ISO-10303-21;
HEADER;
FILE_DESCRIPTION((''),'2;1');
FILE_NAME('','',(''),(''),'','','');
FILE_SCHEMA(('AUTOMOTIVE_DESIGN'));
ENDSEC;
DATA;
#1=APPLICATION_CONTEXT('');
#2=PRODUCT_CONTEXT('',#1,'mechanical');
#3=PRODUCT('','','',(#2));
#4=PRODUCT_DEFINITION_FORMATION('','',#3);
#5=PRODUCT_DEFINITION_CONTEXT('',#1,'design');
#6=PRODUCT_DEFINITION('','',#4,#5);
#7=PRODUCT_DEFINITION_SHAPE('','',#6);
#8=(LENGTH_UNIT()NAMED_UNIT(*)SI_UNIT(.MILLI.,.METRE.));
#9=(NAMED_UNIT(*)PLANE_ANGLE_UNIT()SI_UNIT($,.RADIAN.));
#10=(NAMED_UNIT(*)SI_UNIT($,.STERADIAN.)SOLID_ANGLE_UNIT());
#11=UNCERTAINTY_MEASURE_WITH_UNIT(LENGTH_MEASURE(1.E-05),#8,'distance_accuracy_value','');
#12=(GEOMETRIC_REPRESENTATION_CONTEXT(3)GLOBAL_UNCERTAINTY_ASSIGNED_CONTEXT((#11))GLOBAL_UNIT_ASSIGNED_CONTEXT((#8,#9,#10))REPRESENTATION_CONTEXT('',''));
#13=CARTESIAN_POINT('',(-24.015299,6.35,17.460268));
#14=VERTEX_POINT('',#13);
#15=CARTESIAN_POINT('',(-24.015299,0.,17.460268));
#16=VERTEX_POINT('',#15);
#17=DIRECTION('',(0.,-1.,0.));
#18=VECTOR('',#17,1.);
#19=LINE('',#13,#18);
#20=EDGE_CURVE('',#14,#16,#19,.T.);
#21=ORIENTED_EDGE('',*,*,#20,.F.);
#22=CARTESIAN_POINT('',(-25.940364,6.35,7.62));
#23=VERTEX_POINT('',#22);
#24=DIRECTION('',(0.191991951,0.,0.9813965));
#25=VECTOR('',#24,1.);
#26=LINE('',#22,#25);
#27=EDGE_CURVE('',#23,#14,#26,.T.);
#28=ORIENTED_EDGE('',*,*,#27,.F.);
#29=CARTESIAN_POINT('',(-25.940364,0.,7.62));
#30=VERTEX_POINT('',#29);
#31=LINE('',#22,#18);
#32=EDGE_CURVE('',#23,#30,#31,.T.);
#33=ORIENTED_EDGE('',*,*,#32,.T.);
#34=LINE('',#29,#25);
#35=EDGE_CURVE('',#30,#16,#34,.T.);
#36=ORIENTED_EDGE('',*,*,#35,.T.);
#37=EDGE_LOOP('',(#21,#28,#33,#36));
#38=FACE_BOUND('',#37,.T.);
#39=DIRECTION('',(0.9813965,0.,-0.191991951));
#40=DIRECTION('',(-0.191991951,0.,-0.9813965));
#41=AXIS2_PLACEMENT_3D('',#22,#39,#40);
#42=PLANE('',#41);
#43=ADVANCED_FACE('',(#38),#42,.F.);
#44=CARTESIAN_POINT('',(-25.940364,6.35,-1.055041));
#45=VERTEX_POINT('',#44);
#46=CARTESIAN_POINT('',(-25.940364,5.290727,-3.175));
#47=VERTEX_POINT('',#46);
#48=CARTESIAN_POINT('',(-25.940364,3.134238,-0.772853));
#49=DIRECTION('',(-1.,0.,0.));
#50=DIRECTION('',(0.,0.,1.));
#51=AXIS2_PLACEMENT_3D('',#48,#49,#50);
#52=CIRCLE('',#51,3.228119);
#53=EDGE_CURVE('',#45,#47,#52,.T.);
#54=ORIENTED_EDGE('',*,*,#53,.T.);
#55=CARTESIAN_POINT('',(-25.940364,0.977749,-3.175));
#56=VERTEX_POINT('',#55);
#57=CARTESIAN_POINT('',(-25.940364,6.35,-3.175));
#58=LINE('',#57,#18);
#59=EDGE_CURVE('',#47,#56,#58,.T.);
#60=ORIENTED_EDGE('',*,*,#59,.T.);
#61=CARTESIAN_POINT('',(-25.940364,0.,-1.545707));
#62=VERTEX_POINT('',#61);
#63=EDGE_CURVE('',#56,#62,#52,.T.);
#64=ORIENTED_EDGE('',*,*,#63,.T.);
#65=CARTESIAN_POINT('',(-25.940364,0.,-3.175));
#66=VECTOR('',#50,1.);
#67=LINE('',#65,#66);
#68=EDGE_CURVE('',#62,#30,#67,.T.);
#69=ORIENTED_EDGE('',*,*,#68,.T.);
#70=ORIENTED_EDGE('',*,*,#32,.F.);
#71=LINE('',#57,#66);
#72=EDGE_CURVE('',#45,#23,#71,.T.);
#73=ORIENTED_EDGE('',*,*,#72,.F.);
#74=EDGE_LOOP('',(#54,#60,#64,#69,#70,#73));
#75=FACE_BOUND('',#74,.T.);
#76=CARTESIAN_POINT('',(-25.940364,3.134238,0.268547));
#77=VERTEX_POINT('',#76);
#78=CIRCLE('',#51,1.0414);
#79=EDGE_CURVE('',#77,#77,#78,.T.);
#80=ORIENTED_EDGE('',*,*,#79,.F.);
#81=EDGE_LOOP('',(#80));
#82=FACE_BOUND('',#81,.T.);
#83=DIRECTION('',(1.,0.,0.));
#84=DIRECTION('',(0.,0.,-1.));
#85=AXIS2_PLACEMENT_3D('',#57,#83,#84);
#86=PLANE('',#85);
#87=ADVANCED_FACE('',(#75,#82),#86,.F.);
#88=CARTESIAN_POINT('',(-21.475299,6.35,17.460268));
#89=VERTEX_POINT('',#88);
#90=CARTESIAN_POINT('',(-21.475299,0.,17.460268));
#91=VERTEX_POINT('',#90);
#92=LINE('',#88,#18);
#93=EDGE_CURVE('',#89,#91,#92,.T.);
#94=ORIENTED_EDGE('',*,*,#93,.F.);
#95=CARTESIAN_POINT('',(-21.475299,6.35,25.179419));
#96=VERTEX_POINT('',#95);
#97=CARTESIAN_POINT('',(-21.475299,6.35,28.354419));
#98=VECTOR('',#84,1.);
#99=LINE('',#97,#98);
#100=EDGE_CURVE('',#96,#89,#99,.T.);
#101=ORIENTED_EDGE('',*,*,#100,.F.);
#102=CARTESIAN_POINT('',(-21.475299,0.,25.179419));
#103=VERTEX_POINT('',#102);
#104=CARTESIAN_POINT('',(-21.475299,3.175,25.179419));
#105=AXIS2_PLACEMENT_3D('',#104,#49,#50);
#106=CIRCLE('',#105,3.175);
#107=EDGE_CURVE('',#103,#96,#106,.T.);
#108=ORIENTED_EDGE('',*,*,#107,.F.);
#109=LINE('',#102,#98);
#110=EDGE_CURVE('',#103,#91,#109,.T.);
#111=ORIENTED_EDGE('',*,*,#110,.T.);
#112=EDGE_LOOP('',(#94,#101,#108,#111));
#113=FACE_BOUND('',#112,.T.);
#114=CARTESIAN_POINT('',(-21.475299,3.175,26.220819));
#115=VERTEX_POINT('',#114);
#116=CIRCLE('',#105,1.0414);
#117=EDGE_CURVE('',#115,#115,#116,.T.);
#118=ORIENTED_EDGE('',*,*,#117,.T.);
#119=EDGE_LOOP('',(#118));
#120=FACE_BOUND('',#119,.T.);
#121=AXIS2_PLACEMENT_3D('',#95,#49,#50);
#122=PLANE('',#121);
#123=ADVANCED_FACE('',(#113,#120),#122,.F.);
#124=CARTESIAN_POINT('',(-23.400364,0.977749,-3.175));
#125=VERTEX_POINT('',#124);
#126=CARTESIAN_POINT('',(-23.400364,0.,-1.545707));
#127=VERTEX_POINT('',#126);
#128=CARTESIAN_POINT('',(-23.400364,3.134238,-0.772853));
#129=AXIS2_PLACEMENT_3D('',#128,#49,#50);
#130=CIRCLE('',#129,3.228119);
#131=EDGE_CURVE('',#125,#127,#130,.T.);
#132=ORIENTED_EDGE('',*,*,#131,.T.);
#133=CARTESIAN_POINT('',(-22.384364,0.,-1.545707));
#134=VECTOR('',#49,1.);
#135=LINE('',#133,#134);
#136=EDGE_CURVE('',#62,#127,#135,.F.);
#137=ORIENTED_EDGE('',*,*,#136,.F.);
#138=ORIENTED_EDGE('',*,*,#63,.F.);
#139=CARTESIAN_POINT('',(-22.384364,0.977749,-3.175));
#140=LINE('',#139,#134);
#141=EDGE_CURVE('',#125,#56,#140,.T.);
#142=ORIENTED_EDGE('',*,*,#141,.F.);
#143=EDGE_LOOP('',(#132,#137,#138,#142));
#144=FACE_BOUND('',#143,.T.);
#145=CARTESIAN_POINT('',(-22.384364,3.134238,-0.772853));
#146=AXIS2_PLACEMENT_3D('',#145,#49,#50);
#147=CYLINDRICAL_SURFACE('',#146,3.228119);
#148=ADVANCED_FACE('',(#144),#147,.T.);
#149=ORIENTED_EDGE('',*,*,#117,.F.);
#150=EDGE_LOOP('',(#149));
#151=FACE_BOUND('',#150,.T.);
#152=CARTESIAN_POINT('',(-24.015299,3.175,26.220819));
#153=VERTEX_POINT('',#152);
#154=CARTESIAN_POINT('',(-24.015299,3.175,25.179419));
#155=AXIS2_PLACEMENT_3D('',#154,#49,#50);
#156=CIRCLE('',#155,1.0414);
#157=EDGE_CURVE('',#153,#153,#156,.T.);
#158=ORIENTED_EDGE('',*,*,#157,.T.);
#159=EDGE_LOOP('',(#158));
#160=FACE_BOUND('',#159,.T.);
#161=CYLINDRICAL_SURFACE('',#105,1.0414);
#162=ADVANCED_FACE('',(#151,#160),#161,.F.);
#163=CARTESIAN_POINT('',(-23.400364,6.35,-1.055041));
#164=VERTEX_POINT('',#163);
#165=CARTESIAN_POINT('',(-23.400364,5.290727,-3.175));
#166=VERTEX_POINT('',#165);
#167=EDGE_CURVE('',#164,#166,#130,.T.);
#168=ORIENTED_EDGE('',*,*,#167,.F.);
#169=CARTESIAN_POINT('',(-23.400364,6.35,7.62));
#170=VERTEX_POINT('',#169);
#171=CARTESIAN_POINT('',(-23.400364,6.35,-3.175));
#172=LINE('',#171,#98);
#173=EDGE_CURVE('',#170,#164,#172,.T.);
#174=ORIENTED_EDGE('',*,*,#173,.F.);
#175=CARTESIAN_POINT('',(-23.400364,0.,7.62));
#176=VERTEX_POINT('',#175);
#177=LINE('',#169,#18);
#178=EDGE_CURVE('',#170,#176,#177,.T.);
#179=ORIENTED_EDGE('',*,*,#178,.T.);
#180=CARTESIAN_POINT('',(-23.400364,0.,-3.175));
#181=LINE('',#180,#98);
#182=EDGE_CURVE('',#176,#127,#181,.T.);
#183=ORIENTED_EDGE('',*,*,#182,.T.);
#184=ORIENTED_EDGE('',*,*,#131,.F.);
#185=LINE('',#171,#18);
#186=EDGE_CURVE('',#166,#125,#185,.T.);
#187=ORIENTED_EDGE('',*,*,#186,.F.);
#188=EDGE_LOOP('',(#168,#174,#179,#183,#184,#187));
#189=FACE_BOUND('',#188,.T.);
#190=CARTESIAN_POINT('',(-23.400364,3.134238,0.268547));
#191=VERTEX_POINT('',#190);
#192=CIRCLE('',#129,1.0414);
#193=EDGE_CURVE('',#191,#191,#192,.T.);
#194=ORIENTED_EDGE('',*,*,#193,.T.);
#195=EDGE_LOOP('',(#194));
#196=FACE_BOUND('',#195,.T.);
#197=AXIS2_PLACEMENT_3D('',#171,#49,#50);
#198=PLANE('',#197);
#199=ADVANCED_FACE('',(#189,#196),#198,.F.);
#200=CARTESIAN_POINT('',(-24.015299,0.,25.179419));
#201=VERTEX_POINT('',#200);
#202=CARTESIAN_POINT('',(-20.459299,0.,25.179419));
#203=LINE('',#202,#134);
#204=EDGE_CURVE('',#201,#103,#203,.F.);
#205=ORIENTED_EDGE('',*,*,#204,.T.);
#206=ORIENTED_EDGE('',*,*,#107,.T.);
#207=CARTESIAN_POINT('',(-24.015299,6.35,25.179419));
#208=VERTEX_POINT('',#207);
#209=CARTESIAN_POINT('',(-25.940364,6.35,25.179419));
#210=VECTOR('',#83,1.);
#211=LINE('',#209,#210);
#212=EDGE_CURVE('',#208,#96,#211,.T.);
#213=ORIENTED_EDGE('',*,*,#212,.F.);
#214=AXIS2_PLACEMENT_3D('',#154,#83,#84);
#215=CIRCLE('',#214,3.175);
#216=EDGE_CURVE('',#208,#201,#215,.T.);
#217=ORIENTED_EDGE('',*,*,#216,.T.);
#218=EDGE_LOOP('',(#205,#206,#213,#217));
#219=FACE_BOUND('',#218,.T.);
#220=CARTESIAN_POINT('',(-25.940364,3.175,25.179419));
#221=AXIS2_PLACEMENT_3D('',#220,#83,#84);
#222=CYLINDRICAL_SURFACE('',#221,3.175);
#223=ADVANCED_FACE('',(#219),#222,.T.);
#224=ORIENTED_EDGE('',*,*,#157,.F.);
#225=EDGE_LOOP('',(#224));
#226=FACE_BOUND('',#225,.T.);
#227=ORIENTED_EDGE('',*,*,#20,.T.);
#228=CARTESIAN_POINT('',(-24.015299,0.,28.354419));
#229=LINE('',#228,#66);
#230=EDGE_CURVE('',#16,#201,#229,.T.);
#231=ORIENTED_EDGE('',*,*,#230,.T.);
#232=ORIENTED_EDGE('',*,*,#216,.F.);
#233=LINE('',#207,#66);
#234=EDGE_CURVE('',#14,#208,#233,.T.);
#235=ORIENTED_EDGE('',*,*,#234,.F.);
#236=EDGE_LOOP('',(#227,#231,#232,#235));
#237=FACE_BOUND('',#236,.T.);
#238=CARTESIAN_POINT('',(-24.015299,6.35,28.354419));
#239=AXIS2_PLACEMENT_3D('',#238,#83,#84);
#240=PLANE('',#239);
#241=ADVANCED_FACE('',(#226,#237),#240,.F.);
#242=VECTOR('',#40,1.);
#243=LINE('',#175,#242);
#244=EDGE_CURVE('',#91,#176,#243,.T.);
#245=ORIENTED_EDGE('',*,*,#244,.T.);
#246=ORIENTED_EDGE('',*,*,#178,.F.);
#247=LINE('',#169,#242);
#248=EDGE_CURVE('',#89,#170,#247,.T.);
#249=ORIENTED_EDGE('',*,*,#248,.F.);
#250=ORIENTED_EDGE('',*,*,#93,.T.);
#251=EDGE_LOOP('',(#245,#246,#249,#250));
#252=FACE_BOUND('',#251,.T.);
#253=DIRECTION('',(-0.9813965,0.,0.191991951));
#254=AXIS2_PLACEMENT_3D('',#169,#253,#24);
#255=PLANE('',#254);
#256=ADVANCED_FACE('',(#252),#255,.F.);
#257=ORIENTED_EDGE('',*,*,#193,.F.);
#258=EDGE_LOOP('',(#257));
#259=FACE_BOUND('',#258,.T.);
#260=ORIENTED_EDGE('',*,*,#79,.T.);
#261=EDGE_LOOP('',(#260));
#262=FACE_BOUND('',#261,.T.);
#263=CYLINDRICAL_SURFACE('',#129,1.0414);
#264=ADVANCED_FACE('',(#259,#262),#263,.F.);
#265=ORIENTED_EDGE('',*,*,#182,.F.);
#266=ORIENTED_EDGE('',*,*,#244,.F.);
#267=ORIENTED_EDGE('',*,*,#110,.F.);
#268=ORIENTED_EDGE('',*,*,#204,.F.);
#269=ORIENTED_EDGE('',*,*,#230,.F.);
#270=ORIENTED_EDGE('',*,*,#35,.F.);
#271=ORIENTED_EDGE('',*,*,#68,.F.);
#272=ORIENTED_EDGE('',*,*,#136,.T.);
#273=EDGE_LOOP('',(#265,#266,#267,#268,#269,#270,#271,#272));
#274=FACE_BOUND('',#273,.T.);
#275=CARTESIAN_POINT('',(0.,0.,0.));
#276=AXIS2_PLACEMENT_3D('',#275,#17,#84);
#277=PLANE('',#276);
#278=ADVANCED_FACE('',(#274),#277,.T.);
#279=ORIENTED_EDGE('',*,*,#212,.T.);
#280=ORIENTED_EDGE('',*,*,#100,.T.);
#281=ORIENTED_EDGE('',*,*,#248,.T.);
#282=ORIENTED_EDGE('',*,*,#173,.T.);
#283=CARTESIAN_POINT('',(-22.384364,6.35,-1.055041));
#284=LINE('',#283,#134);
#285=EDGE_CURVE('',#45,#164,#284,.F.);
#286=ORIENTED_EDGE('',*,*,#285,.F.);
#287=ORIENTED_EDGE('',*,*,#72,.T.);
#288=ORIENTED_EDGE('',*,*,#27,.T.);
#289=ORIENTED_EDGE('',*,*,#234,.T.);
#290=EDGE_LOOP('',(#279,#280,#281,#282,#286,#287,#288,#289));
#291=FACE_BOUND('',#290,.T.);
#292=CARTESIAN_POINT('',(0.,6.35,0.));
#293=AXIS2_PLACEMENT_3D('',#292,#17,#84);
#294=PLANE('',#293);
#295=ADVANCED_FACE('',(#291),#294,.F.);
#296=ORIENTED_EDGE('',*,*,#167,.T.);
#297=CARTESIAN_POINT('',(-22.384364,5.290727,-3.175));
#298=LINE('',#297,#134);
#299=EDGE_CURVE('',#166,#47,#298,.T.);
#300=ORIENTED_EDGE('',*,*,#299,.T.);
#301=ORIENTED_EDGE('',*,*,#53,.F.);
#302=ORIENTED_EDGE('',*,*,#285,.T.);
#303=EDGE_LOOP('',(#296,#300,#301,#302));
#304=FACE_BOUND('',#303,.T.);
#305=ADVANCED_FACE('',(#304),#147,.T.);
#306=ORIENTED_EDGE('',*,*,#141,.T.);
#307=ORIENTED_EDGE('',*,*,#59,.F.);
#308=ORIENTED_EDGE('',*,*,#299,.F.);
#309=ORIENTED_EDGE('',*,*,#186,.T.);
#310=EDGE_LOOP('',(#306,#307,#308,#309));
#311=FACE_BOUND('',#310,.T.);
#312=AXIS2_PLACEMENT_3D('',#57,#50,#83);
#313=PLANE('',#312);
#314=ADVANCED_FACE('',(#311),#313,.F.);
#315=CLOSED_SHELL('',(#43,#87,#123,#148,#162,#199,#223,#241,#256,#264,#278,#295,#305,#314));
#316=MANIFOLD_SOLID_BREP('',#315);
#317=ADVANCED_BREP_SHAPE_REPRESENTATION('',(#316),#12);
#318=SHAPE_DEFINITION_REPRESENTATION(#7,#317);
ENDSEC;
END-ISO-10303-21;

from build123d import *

# Parameters (mm, degrees)
BOSS_EXTRUDE1_DEPTH     = 6.35
CUT_EXTRUDE1_DEPTH      = 30.397829873
CUT_EXTRUDE1_DEPTH_BACK = 3.556
CUT_EXTRUDE2_START      = -2.54
CUT_EXTRUDE2_DEPTH      = 2.54
SKETCH4_3_R             = 1.0414
CUT_EXTRUDE3_DEPTH      = 2.54
SKETCH3_3_R             = 1.0414
CUT_EXTRUDE4_DEPTH      = 2.54


# Read off the part's stored shape, not the designer's step: Cut-Extrude2
with BuildPart() as part:
    # Sketch1 → Boss-Extrude1 (new body)
    with BuildSketch(Plane(origin=(0, 0, 0), x_dir=(1, 0, 0), z_dir=(0, 1, 0))):
        Polygon((-24.015298923, -26.283339213), (-24.015298923, -25.179419289), (-24.015298923, -17.460268456), (-25.940364211, -7.62), (-25.940364211, 3.175), (-23.400364211, 3.175), (-23.400364211, -7.62), (-21.475298923, -17.460268456), (-21.475298923, -25.179419289), (-21.475298923, -28.354419289), (-24.015298923, -28.354419289), align=None)
    extrude(amount=BOSS_EXTRUDE1_DEPTH)

    # Sketch3 → Cut-Extrude1 (cut, two sides: drawn at the far end of the back side and taken through both)
    with BuildSketch(Plane.ZY.offset(25.940364211).offset(-CUT_EXTRUDE1_DEPTH_BACK)):
        with BuildLine():
            Line((68.316456583, 0.312090818), (-0.490666477, 6.35))
            ThreePointArc((-0.490666477, 6.35), (-3.991378408, 2.885541924), (0, 0))
            Line((0, 0), (67.062782235, 16.536619059))
            Line((67.062782235, 16.536619059), (-70.669713894, 5.893986208))
            Line((-70.669713894, 5.893986208), (-69.416039547, -10.330542032))
            Line((-69.416039547, -10.330542032), (68.316456583, 0.312090818))
        make_face()
    extrude(amount=CUT_EXTRUDE1_DEPTH + CUT_EXTRUDE1_DEPTH_BACK, mode=Mode.SUBTRACT)


with BuildPart() as cut_extrude1_kept_piece:
    # of the separate pieces the step leaves, the one the design keeps (cut_extrude1_pieces_kept)
    add(part.part.solids().sort_by_distance((-24.015298923, 0, 17.460268456))[0])

    # Cut-Extrude2 outline → Cut-Extrude2 (cut)
    with BuildSketch(Plane.ZY.offset(24.015298923).offset(CUT_EXTRUDE2_START)):
        with BuildLine():
            Line((28.354419289, 6.35), (25.179419289, 6.35))
            ThreePointArc((25.179419289, 6.35), (27.424483319, 5.42006403), (28.354419289, 3.175))
            Line((28.354419289, 3.175), (28.354419289, 6.35))
        make_face()
        with BuildLine():
            Line((28.354419289, 0), (28.354419289, 3.175))
            ThreePointArc((28.354419289, 3.175), (27.424483319, 0.92993597), (25.179419289, 0))
            Line((25.179419289, 0), (28.354419289, 0))
        make_face()
    extrude(amount=CUT_EXTRUDE2_DEPTH, mode=Mode.SUBTRACT)

    # Sketch4<3> → Cut-Extrude3 (cut)
    with BuildSketch(Plane.ZY.offset(24.015298923)):
        with Locations((25.179419289, 3.175)):
            Circle(SKETCH4_3_R)
    extrude(amount=-CUT_EXTRUDE3_DEPTH, mode=Mode.SUBTRACT)

    # Sketch3<3> → Cut-Extrude4 (cut)
    with BuildSketch(Plane.ZY.offset(25.940364211)):
        with Locations((-0.772853494, 3.134238346)):
            Circle(SKETCH3_3_R)
    extrude(amount=-CUT_EXTRUDE4_DEPTH, mode=Mode.SUBTRACT)


solid = cut_extrude1_kept_piece.part
